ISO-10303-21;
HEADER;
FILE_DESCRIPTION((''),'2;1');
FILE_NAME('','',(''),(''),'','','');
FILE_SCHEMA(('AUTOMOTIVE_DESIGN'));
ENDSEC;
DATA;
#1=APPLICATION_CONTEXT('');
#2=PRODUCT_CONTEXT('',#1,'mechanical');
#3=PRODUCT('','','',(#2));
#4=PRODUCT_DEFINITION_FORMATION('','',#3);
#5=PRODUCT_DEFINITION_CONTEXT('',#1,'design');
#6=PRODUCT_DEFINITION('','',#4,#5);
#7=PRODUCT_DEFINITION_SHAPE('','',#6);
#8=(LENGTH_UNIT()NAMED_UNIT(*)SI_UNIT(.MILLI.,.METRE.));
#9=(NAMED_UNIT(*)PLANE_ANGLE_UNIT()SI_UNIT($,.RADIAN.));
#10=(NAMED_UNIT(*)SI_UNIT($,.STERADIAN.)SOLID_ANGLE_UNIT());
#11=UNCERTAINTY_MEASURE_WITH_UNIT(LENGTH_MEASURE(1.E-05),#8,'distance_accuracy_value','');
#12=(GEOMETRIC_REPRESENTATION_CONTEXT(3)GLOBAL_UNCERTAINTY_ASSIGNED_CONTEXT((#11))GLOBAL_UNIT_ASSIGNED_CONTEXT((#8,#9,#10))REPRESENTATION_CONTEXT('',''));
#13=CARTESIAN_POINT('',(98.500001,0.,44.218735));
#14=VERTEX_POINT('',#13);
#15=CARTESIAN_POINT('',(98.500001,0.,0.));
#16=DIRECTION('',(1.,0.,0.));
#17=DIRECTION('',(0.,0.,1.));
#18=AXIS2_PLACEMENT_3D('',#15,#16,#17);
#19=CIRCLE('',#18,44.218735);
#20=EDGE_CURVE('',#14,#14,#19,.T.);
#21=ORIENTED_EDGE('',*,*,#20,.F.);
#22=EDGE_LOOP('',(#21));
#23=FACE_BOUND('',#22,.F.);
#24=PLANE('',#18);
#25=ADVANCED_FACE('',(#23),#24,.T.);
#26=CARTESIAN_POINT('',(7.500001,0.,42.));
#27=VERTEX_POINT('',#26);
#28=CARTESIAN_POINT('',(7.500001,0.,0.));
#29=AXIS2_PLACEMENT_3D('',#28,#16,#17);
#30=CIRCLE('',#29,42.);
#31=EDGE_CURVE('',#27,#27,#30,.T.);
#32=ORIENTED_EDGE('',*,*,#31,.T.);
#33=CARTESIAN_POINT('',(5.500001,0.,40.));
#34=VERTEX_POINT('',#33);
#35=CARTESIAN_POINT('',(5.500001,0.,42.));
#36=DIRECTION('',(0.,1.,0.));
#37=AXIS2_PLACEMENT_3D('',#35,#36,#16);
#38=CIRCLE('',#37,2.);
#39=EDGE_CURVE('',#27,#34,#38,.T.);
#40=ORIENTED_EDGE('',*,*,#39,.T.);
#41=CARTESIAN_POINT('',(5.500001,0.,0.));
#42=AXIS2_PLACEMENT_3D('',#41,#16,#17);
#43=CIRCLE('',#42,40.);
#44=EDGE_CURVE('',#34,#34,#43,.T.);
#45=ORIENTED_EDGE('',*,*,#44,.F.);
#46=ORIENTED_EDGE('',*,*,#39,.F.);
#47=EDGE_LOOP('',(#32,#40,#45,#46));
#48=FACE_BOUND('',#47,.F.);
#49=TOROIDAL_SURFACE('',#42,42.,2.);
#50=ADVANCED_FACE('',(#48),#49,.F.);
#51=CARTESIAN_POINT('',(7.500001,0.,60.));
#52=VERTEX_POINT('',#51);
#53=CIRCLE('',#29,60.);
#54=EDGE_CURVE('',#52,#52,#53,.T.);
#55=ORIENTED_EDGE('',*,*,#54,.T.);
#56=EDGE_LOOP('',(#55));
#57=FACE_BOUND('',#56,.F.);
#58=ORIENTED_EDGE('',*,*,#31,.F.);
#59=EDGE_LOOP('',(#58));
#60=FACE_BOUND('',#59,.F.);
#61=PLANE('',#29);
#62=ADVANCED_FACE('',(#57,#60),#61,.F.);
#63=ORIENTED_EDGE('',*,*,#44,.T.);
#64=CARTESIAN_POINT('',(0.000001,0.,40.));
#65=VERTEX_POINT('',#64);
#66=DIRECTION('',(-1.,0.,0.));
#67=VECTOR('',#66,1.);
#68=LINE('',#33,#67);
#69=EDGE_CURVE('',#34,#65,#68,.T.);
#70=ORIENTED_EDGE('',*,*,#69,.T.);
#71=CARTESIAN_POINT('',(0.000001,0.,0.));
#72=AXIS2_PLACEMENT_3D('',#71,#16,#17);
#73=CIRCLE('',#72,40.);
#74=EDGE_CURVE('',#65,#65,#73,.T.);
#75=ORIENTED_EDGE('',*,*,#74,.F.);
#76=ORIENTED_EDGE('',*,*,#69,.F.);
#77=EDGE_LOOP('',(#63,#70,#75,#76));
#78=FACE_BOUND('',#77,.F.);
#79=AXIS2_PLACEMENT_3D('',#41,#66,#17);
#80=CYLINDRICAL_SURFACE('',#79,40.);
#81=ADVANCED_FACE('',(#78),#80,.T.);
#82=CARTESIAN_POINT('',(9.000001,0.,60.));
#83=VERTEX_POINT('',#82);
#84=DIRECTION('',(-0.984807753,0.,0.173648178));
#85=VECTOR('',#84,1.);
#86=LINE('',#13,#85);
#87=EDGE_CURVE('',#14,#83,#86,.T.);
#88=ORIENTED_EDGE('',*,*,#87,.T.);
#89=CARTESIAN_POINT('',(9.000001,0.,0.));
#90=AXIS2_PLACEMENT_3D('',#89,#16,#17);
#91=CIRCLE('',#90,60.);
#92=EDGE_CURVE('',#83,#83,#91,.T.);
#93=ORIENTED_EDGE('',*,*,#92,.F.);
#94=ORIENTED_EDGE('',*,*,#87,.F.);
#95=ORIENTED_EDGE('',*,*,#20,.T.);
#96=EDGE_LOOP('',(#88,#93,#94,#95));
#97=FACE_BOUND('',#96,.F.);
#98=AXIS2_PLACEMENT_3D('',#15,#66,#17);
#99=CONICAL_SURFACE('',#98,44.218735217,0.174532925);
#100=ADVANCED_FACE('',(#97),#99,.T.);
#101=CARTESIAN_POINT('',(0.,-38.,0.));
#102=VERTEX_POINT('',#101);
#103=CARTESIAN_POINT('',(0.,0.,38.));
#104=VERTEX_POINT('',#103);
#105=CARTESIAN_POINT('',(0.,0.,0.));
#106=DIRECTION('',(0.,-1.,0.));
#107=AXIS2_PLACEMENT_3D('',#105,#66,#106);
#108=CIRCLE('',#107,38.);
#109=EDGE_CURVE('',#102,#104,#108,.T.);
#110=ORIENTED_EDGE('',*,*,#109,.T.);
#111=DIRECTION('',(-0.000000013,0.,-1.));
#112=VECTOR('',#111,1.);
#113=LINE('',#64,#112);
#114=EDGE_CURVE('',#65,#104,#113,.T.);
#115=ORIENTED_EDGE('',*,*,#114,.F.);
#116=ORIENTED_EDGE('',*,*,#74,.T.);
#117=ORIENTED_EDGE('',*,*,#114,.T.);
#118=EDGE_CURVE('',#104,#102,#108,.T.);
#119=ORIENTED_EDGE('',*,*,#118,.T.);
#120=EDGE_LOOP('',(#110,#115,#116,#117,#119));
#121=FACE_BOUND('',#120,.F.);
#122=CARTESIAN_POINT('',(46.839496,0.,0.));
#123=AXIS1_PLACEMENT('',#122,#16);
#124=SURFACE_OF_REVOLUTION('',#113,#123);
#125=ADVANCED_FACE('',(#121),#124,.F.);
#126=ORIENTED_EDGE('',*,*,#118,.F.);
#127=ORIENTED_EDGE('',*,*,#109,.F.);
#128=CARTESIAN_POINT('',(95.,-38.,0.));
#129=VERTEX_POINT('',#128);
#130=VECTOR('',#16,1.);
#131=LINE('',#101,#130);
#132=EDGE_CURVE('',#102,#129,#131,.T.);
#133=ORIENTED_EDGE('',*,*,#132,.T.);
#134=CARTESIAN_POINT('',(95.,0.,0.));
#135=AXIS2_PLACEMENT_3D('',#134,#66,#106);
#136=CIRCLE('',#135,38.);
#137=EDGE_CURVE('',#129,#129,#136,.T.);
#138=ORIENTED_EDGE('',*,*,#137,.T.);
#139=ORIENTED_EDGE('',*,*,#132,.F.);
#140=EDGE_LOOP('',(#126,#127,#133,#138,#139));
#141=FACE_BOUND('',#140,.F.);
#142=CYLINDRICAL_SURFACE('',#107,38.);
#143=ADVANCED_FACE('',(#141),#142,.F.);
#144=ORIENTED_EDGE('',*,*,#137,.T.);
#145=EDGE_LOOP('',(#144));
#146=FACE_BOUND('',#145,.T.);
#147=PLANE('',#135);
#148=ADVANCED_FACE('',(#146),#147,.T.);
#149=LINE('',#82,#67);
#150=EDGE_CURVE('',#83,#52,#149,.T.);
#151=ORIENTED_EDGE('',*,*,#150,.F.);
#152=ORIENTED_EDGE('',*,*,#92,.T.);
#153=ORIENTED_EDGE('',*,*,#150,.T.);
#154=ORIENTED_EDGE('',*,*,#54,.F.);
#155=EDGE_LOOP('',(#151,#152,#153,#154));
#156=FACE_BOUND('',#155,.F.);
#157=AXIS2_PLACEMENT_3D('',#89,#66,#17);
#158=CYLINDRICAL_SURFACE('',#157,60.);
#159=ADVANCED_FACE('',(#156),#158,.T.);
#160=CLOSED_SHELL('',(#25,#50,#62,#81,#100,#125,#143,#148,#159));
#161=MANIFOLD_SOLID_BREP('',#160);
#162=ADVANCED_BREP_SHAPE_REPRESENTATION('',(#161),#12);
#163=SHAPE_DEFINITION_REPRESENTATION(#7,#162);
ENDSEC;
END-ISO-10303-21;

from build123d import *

# Parameters (mm, degrees)
F2_R     = 38
F3_DEPTH = 95


with BuildPart() as f1:
    # F0 (on Front) → F1 (revolve)
    with BuildSketch(Plane.XZ):
        with BuildLine():
            Line((5.073e-07, 40.0000000001), (-1e-10, 0))
            Line((0, 0), (7.5000005075, -7e-10))
            Line((7.5000005075, -7e-10), (7.5000005075, 42.0000000001))
            ThreePointArc((7.5000005075, 42.0000000001), (6.9142140698, 40.5857864377), (5.5000005075, 40.0000000001))
            Line((5.5000005075, 40.0000000001), (5.073e-07, 40.0000000001))
        make_face()
        Polygon((7.5000005075, 42.0000000001), (7.5000005075, -7e-10), (9.0000005075, -9e-10), (9.0000005075, 59.9999999993), (7.5000005075, 59.9999999993), align=None)
        Polygon((9.0000005075, 59.9999999993), (9.0000005075, -9e-10), (98.5000005577, -9.5e-09), (98.5000005577, 43.954244746), (98.5000005577, 44.218735217), align=None)
    revolve(axis=Axis((46.8394961208, 0, 0), (1, 0, 0)))

    # F2 (on face) → F3 (cut)
    with BuildSketch(Plane(origin=(2.536e-07, 0, 0), x_dir=(0, -1, 0), z_dir=(-1, 0, 0))):
        Circle(F2_R)
    extrude(amount=-F3_DEPTH, mode=Mode.SUBTRACT)


solid = f1.part
